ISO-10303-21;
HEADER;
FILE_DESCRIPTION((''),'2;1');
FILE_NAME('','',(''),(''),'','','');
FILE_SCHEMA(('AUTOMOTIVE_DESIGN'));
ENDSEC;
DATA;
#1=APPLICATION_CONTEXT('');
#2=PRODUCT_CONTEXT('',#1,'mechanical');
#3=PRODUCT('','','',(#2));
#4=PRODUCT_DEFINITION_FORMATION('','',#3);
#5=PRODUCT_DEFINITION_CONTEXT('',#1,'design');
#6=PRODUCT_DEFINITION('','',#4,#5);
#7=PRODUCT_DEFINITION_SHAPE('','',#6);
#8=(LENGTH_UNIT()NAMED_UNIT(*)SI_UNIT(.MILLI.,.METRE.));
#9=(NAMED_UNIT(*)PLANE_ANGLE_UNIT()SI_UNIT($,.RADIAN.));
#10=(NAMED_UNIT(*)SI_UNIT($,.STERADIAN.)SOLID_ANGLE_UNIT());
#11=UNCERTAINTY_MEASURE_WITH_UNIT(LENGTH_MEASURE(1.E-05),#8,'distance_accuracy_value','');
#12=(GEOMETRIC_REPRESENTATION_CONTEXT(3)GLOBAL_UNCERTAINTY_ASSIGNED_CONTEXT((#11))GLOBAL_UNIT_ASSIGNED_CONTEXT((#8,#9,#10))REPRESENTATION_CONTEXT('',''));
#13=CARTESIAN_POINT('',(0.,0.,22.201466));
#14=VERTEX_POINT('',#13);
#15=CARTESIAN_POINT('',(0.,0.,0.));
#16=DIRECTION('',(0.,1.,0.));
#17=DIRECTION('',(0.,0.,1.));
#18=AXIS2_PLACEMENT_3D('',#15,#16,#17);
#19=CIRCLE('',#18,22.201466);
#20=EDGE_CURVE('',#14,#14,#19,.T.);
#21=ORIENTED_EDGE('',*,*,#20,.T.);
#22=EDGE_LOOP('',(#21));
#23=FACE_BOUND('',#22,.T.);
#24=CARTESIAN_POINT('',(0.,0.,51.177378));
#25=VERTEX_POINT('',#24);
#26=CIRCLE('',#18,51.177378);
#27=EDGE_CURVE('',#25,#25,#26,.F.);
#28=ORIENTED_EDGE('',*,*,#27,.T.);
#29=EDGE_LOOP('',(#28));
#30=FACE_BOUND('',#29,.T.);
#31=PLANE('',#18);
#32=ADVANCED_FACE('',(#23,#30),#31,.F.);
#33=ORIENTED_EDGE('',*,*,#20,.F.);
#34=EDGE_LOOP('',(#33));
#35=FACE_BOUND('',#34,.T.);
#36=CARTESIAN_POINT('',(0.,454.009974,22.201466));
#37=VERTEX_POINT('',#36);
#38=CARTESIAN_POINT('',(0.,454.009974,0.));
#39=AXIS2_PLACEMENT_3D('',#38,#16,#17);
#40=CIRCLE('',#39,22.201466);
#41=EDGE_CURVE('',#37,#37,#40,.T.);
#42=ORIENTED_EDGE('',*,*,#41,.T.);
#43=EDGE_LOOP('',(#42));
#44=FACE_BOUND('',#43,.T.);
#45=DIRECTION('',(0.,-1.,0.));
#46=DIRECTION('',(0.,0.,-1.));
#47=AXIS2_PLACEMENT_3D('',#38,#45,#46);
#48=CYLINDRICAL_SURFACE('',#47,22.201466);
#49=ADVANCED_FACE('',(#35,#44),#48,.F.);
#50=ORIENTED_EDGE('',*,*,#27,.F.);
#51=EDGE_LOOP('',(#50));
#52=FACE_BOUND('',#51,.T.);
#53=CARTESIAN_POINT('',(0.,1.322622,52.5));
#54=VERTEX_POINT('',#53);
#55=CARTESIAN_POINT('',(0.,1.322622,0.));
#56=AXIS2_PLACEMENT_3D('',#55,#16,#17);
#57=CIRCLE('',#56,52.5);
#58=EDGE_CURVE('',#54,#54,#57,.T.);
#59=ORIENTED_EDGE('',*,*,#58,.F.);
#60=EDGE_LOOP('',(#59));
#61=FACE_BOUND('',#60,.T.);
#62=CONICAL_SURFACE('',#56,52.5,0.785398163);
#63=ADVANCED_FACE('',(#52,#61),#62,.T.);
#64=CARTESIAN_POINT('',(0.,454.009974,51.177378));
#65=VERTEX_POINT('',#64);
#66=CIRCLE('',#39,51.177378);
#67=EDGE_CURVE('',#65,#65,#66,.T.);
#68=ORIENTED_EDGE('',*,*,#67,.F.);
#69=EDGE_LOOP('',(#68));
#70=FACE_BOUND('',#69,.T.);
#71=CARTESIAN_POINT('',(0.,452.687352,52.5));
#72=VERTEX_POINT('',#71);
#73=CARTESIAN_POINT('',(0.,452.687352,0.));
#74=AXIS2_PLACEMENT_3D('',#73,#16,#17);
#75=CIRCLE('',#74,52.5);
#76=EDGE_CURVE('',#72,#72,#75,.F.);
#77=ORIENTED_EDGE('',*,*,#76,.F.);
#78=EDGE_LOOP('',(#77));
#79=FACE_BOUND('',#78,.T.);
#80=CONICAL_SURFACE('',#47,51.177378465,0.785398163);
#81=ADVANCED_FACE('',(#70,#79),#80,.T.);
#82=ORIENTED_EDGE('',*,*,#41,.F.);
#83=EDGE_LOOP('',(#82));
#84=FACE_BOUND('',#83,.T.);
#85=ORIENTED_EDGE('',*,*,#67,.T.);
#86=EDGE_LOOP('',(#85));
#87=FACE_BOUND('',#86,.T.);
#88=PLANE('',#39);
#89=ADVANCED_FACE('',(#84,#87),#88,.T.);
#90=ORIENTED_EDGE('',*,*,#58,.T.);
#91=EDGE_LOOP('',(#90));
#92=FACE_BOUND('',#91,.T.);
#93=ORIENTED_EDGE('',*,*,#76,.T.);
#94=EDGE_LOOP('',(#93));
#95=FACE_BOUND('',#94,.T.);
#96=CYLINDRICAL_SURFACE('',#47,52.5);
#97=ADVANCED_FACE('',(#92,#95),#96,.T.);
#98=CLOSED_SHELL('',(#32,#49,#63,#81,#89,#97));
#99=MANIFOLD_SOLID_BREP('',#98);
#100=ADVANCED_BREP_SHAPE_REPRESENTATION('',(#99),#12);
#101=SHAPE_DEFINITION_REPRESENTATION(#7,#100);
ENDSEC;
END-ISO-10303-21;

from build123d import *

# Parameters (mm, degrees)
SKETCH1_R           = 52.5
BOSS_EXTRUDE1_DEPTH = 454.009973873
SKETCH2_R           = 22.201465677
CUT_EXTRUDE1_DEPTH  = 461.040820337
CHAMFER1_SIZE       = 1.322621535


with BuildPart() as part:
    # Sketch1 → Boss-Extrude1 (new body)
    with BuildSketch(Plane(origin=(0, 0, 0), x_dir=(1, 0, 0), z_dir=(0, 1, 0))):
        Circle(SKETCH1_R)
    extrude(amount=BOSS_EXTRUDE1_DEPTH)

    # Sketch2 → Cut-Extrude1 (cut, through all)
    with BuildSketch(Plane(origin=(0, 0, 0), x_dir=(1, 0, 0), z_dir=(0, 1, 0))):
        Circle(SKETCH2_R)
    extrude(amount=CUT_EXTRUDE1_DEPTH, mode=Mode.SUBTRACT)

    # Chamfer1
    chamfer1_edges = [part.edges().sort_by_distance(p)[0] for p in [
        (-52.5, 454.009973873, 0),
        (-52.5, 0, 0),
    ]]
    chamfer(chamfer1_edges, length=CHAMFER1_SIZE)


solid = part.part
